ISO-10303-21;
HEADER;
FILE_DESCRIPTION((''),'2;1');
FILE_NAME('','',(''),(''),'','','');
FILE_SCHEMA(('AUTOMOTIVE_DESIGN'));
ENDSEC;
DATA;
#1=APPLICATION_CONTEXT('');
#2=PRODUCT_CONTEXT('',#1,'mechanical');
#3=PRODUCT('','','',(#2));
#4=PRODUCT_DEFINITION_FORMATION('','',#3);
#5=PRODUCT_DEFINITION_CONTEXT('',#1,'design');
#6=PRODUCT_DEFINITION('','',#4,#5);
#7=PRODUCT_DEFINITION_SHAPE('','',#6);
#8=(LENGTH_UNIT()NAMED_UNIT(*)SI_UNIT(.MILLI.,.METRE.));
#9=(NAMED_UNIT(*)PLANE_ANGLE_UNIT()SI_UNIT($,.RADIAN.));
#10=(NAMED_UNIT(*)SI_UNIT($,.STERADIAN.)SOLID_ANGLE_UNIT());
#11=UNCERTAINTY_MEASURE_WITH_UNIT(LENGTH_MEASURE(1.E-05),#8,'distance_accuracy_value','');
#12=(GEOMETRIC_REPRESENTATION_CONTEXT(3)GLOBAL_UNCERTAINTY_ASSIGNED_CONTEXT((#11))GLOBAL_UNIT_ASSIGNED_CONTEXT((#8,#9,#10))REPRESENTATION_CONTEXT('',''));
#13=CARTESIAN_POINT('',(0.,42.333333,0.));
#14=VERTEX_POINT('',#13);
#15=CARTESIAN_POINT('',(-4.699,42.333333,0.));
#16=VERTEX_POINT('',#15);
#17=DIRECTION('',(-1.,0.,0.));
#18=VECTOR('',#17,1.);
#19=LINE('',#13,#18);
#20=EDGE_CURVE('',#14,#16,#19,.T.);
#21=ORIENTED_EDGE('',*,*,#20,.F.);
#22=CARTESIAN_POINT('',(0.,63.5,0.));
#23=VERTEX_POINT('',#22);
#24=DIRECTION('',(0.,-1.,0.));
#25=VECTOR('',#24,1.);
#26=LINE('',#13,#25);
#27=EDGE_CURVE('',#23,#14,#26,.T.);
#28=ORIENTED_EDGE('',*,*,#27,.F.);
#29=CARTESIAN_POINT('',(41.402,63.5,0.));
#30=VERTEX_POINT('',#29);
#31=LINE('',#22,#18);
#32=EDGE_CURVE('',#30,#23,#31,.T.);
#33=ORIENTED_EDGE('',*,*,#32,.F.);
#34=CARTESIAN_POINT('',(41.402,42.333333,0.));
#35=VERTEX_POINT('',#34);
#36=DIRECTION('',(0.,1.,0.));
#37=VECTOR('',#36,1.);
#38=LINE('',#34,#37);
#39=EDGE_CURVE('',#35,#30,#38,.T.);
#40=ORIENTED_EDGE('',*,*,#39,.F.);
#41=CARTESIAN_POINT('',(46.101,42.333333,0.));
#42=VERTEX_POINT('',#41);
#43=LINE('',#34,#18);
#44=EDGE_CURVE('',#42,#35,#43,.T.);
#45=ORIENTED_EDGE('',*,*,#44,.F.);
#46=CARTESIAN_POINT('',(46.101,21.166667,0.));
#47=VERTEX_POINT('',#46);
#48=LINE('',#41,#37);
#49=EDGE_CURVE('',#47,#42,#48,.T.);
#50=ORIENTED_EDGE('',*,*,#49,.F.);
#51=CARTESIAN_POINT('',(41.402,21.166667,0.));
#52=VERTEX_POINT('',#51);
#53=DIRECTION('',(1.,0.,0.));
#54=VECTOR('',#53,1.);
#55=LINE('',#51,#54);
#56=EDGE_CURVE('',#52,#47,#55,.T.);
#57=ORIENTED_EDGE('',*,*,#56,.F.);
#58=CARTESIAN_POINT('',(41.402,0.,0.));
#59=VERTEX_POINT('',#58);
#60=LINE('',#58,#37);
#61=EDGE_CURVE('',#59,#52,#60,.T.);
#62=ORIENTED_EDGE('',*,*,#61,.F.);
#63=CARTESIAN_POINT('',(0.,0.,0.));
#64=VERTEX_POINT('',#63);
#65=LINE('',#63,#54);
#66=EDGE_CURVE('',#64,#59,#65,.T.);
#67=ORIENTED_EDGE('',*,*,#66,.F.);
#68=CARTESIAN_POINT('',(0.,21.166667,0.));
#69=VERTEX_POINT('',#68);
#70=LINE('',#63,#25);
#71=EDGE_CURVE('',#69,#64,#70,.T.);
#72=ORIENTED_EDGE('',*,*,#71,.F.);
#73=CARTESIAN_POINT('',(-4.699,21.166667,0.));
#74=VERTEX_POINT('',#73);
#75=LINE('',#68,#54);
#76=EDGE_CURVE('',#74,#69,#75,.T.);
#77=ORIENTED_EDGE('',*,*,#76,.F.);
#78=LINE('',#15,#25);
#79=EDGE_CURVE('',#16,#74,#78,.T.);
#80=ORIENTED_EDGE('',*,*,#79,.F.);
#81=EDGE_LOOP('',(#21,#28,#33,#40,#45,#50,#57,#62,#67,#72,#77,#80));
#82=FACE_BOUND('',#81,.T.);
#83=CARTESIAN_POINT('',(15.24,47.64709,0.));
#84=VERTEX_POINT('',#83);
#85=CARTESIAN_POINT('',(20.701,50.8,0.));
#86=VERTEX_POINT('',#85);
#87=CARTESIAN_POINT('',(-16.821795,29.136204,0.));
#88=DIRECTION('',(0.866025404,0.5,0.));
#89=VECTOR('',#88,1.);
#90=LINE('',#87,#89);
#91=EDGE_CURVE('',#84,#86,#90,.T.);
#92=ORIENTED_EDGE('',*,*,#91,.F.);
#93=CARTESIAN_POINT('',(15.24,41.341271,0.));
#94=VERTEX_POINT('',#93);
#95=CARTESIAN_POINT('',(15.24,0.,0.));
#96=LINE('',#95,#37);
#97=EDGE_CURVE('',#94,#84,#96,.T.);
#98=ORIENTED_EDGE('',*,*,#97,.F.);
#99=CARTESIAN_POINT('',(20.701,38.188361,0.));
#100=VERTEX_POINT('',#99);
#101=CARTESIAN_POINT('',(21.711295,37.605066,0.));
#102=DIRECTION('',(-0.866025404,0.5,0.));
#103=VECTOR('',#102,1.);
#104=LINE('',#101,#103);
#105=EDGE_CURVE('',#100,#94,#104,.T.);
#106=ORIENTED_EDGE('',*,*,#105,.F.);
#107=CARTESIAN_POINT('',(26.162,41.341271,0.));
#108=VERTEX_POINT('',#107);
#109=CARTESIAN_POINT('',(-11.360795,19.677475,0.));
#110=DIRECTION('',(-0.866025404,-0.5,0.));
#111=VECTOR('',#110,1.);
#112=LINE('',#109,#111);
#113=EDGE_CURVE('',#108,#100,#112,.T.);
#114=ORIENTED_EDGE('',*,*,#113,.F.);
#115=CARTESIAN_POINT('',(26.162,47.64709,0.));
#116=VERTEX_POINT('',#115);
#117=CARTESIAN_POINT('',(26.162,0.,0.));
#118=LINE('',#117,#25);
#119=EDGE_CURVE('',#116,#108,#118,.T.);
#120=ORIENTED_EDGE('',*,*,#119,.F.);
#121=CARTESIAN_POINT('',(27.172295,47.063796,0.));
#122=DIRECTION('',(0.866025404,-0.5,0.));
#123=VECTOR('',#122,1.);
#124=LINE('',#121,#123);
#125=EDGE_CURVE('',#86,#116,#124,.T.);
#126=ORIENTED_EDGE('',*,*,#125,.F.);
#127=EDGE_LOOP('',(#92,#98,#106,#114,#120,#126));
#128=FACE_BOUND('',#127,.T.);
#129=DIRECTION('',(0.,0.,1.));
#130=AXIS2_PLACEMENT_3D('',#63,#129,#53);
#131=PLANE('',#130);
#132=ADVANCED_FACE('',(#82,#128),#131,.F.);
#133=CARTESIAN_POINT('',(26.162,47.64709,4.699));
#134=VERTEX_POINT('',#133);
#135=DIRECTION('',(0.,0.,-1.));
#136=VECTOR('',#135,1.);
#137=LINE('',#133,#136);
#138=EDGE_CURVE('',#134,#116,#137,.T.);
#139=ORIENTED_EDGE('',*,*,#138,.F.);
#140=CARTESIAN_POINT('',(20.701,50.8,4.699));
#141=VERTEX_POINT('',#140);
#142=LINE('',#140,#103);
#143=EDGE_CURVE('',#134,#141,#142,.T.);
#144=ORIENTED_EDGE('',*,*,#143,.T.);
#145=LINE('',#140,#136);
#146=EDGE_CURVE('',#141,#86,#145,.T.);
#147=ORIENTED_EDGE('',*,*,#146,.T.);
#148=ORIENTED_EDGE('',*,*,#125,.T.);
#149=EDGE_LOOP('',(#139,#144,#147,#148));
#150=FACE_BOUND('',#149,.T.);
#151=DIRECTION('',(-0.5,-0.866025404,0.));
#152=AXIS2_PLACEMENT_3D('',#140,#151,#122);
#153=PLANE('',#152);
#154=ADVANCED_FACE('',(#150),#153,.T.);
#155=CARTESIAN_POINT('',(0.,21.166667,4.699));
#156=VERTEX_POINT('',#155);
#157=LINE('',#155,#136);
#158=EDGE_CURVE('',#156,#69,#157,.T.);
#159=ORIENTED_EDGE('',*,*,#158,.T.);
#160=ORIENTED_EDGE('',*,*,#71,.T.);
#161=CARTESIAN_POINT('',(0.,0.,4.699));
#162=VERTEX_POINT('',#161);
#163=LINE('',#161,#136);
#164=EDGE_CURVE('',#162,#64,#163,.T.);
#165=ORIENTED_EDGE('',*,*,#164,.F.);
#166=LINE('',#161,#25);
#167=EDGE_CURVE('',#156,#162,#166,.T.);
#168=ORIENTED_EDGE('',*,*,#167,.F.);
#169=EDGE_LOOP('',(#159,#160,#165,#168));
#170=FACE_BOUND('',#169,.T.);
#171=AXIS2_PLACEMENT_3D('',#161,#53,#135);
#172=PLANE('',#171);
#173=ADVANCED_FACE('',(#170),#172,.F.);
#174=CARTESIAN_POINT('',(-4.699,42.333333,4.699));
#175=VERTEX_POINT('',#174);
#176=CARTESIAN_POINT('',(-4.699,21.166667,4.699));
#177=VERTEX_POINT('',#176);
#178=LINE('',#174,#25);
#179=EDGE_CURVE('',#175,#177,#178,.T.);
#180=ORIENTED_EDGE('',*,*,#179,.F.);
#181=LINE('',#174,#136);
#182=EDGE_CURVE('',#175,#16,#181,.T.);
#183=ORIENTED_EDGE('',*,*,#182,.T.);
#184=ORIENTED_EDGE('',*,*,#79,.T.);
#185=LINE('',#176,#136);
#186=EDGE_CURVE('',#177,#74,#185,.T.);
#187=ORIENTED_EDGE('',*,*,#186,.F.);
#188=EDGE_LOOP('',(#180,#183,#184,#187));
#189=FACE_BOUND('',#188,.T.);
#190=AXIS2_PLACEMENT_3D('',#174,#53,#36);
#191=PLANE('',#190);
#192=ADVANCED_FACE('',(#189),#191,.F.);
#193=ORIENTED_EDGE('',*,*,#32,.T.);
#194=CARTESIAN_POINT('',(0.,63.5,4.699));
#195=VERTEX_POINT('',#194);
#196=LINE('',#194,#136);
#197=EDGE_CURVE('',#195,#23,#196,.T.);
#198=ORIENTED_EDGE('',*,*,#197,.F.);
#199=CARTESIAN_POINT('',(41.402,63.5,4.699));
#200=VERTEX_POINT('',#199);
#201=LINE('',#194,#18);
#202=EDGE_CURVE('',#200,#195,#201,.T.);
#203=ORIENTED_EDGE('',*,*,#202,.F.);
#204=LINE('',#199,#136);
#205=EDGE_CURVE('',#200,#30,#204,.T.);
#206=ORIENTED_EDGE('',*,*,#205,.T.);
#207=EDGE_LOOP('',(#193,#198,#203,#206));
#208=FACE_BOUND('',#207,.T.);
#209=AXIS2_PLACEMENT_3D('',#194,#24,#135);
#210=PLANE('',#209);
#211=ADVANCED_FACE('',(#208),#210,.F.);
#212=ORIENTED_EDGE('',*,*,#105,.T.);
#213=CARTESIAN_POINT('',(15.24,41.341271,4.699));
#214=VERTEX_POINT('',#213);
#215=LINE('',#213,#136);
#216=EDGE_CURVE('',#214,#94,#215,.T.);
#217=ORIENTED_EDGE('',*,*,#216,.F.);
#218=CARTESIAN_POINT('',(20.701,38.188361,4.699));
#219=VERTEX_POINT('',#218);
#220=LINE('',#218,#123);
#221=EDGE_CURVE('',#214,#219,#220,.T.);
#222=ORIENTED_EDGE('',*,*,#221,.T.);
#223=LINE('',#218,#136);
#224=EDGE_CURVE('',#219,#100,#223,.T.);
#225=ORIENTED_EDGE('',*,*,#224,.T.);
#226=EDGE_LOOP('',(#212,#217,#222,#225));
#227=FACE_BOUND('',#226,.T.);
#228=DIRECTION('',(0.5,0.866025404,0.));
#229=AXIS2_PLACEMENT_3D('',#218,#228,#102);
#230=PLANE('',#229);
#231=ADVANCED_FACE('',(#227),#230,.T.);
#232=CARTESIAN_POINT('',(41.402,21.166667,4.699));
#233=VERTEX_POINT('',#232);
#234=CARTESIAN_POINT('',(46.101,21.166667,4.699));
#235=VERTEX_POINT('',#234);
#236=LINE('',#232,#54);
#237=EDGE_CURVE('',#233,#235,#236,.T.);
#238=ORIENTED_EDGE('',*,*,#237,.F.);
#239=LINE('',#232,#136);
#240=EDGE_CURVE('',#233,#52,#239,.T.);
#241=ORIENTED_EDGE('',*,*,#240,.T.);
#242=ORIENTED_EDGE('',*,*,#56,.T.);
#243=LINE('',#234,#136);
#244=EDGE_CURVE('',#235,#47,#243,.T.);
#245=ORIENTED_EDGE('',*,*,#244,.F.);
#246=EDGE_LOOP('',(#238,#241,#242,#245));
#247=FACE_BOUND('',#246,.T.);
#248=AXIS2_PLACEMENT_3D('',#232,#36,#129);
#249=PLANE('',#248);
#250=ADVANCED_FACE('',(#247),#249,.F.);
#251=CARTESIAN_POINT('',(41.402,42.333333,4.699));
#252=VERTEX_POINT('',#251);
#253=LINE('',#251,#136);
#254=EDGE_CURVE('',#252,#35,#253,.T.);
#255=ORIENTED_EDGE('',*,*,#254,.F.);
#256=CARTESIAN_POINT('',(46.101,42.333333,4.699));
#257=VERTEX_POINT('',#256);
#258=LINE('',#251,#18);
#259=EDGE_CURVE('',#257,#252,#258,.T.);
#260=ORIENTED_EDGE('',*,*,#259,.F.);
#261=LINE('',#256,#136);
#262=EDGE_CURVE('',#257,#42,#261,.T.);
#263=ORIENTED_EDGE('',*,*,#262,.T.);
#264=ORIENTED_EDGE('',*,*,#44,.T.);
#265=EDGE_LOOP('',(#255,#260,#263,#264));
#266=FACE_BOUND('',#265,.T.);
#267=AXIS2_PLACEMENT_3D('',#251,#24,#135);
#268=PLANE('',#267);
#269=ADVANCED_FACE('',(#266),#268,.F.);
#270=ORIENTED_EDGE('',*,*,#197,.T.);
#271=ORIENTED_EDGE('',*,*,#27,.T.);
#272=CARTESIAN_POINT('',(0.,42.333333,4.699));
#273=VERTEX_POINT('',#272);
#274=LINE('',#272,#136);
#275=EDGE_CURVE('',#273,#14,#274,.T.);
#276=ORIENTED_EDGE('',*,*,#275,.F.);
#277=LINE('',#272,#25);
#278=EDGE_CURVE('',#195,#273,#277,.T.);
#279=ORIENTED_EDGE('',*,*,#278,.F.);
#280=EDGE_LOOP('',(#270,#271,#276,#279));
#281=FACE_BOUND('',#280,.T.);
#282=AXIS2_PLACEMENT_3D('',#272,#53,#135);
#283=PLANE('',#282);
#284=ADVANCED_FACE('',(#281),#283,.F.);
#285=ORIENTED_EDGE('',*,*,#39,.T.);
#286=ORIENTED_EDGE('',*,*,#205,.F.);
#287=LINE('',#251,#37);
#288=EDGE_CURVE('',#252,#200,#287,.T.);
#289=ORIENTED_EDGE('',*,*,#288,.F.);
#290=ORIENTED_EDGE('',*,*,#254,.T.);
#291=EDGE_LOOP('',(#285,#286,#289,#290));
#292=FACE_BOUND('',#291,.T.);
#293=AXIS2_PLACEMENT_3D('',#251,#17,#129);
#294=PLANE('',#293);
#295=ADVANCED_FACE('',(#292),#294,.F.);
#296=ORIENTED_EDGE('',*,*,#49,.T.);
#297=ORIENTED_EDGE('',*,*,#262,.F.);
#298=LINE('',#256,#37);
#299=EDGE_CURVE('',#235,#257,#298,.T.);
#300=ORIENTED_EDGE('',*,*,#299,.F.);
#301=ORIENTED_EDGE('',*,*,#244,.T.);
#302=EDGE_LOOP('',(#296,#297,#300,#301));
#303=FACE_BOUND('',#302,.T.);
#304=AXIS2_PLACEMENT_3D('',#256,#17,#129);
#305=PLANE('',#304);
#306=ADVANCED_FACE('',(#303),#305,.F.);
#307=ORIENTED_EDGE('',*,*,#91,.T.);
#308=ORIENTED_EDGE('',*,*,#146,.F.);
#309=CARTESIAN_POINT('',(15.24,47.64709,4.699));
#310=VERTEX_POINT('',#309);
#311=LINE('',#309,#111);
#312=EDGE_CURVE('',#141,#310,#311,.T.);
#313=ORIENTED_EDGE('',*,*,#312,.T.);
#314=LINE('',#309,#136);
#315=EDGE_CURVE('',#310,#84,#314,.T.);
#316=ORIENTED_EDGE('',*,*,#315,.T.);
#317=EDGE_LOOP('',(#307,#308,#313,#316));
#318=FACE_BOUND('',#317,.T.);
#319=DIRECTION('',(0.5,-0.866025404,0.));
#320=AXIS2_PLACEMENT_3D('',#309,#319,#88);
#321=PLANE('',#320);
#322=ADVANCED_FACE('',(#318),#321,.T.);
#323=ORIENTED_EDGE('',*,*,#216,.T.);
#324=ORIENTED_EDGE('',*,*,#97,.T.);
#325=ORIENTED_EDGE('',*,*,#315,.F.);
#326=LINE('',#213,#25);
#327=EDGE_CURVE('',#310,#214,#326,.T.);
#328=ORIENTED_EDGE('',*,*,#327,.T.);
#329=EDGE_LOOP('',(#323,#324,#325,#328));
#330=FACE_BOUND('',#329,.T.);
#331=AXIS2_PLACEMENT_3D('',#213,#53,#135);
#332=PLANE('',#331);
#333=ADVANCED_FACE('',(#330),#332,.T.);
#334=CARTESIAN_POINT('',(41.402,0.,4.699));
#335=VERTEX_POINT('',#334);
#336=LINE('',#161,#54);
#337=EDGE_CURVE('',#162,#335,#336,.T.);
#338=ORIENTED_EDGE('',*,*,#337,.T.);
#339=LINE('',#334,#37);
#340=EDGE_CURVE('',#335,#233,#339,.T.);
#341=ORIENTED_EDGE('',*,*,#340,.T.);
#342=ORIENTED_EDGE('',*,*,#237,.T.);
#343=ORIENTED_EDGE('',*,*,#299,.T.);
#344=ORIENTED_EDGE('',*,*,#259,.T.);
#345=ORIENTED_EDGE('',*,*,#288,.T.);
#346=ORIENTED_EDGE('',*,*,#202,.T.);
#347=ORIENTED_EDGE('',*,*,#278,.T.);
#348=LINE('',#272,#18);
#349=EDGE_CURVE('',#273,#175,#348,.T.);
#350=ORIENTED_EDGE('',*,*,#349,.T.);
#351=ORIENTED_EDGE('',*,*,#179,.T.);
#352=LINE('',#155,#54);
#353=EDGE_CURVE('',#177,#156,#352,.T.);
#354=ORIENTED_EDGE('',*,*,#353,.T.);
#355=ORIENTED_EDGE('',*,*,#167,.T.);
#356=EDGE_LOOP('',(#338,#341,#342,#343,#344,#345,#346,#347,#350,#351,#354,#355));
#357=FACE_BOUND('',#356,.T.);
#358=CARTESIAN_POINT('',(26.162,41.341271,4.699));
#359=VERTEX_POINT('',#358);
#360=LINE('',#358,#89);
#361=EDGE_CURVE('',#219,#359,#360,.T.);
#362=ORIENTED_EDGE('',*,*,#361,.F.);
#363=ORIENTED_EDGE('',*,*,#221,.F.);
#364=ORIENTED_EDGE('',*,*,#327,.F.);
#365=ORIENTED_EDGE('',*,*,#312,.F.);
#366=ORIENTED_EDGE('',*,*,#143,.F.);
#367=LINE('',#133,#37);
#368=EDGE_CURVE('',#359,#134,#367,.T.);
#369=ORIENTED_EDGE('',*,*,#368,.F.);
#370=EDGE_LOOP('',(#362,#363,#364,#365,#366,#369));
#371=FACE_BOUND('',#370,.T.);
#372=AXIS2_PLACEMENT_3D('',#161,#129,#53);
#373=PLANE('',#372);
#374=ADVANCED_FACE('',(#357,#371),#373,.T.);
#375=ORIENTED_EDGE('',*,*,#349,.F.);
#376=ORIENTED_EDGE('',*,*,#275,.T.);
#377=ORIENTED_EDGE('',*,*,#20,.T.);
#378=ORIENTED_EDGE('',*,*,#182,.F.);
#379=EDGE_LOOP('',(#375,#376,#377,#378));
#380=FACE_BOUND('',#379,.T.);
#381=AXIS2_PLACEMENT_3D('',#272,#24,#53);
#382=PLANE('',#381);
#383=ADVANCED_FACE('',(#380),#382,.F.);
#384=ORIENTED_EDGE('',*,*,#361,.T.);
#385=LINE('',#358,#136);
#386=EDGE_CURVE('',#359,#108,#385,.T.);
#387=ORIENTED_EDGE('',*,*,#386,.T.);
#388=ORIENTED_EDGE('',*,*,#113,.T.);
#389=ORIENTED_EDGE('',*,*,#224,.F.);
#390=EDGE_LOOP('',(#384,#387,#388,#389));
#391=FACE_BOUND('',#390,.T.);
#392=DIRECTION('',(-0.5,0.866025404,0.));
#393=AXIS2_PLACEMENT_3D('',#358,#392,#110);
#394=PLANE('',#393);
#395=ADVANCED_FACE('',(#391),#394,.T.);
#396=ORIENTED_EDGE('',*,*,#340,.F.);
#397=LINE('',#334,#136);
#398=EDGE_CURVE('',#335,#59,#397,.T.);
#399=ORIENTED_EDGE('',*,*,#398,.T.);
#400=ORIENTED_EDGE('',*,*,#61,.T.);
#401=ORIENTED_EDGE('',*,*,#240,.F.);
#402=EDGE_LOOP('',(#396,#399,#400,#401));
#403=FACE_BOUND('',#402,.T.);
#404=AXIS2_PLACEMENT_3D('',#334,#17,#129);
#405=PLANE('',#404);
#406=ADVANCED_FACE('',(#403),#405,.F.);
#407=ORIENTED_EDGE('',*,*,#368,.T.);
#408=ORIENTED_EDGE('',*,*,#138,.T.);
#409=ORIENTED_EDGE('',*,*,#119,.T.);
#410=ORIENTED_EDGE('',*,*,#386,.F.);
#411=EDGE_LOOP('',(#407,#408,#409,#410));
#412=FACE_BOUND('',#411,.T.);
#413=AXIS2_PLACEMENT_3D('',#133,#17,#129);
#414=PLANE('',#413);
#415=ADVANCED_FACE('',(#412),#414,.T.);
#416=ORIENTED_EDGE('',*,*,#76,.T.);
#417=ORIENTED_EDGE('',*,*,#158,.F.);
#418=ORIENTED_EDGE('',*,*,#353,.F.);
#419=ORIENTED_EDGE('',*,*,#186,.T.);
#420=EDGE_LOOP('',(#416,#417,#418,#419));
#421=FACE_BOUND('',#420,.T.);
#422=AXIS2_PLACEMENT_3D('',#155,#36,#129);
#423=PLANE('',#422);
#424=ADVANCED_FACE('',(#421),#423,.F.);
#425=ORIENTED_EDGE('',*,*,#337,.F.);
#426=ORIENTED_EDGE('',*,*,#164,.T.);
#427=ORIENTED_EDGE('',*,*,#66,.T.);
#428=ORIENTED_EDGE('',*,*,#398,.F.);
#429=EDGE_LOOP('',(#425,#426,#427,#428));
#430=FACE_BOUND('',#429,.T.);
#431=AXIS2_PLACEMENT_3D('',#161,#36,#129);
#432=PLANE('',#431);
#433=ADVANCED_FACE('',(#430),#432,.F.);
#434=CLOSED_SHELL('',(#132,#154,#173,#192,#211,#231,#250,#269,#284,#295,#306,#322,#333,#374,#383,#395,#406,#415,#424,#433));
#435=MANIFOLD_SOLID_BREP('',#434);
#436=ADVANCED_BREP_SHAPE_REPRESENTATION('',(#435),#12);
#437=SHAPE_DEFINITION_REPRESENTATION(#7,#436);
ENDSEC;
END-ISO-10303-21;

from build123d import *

# Parameters (mm, degrees)
BOSS_EXTRUDE1_DEPTH = 4.699
SKETCH2_R           = 3.175
CUT_EXTRUDE1_DEPTH  = 79.610640514
CAVITY1_OUTLINE_R   = 3.175
CAVITY1_DEPTH       = 4.699


# Read off the part's stored shape, not the designer's step: Cavity1
with BuildPart() as part:
    # Sketch1 → Boss-Extrude1 (new body)
    with BuildSketch(Plane.XY):
        Polygon((0, 42.333333333), (0, 63.5), (41.402, 63.5), (41.402, 42.333333333), (46.101, 42.333333333), (46.101, 21.166666667), (41.402, 21.166666667), (41.402, 0), (0, 0), (0, 21.166666667), (-4.699, 21.166666667), (-4.699, 42.333333333), align=None)
    extrude(amount=BOSS_EXTRUDE1_DEPTH)

    # Sketch2 → Cut-Extrude1 (cut, through all)
    with BuildSketch(Plane(origin=(0, 0, 0), x_dir=(-1, 0, 0), z_dir=(0, 0, -1))):
        with Locations((-20.701, 44.45)):
            Circle(SKETCH2_R)
    extrude(amount=-CUT_EXTRUDE1_DEPTH, mode=Mode.SUBTRACT)

    # Cavity1 outline → Cavity1 (cut)
    with BuildSketch(Plane.XY):
        Polygon((15.24, 41.34127054), (20.701, 38.18836072), (26.162, 41.34127054), (26.162, 47.64709018), (20.701, 50.8), (15.24, 47.64709018), align=None)
        with Locations((20.701, 44.45)):
            Circle(CAVITY1_OUTLINE_R, mode=Mode.SUBTRACT)
    extrude(amount=CAVITY1_DEPTH, mode=Mode.SUBTRACT)


solid = part.part
